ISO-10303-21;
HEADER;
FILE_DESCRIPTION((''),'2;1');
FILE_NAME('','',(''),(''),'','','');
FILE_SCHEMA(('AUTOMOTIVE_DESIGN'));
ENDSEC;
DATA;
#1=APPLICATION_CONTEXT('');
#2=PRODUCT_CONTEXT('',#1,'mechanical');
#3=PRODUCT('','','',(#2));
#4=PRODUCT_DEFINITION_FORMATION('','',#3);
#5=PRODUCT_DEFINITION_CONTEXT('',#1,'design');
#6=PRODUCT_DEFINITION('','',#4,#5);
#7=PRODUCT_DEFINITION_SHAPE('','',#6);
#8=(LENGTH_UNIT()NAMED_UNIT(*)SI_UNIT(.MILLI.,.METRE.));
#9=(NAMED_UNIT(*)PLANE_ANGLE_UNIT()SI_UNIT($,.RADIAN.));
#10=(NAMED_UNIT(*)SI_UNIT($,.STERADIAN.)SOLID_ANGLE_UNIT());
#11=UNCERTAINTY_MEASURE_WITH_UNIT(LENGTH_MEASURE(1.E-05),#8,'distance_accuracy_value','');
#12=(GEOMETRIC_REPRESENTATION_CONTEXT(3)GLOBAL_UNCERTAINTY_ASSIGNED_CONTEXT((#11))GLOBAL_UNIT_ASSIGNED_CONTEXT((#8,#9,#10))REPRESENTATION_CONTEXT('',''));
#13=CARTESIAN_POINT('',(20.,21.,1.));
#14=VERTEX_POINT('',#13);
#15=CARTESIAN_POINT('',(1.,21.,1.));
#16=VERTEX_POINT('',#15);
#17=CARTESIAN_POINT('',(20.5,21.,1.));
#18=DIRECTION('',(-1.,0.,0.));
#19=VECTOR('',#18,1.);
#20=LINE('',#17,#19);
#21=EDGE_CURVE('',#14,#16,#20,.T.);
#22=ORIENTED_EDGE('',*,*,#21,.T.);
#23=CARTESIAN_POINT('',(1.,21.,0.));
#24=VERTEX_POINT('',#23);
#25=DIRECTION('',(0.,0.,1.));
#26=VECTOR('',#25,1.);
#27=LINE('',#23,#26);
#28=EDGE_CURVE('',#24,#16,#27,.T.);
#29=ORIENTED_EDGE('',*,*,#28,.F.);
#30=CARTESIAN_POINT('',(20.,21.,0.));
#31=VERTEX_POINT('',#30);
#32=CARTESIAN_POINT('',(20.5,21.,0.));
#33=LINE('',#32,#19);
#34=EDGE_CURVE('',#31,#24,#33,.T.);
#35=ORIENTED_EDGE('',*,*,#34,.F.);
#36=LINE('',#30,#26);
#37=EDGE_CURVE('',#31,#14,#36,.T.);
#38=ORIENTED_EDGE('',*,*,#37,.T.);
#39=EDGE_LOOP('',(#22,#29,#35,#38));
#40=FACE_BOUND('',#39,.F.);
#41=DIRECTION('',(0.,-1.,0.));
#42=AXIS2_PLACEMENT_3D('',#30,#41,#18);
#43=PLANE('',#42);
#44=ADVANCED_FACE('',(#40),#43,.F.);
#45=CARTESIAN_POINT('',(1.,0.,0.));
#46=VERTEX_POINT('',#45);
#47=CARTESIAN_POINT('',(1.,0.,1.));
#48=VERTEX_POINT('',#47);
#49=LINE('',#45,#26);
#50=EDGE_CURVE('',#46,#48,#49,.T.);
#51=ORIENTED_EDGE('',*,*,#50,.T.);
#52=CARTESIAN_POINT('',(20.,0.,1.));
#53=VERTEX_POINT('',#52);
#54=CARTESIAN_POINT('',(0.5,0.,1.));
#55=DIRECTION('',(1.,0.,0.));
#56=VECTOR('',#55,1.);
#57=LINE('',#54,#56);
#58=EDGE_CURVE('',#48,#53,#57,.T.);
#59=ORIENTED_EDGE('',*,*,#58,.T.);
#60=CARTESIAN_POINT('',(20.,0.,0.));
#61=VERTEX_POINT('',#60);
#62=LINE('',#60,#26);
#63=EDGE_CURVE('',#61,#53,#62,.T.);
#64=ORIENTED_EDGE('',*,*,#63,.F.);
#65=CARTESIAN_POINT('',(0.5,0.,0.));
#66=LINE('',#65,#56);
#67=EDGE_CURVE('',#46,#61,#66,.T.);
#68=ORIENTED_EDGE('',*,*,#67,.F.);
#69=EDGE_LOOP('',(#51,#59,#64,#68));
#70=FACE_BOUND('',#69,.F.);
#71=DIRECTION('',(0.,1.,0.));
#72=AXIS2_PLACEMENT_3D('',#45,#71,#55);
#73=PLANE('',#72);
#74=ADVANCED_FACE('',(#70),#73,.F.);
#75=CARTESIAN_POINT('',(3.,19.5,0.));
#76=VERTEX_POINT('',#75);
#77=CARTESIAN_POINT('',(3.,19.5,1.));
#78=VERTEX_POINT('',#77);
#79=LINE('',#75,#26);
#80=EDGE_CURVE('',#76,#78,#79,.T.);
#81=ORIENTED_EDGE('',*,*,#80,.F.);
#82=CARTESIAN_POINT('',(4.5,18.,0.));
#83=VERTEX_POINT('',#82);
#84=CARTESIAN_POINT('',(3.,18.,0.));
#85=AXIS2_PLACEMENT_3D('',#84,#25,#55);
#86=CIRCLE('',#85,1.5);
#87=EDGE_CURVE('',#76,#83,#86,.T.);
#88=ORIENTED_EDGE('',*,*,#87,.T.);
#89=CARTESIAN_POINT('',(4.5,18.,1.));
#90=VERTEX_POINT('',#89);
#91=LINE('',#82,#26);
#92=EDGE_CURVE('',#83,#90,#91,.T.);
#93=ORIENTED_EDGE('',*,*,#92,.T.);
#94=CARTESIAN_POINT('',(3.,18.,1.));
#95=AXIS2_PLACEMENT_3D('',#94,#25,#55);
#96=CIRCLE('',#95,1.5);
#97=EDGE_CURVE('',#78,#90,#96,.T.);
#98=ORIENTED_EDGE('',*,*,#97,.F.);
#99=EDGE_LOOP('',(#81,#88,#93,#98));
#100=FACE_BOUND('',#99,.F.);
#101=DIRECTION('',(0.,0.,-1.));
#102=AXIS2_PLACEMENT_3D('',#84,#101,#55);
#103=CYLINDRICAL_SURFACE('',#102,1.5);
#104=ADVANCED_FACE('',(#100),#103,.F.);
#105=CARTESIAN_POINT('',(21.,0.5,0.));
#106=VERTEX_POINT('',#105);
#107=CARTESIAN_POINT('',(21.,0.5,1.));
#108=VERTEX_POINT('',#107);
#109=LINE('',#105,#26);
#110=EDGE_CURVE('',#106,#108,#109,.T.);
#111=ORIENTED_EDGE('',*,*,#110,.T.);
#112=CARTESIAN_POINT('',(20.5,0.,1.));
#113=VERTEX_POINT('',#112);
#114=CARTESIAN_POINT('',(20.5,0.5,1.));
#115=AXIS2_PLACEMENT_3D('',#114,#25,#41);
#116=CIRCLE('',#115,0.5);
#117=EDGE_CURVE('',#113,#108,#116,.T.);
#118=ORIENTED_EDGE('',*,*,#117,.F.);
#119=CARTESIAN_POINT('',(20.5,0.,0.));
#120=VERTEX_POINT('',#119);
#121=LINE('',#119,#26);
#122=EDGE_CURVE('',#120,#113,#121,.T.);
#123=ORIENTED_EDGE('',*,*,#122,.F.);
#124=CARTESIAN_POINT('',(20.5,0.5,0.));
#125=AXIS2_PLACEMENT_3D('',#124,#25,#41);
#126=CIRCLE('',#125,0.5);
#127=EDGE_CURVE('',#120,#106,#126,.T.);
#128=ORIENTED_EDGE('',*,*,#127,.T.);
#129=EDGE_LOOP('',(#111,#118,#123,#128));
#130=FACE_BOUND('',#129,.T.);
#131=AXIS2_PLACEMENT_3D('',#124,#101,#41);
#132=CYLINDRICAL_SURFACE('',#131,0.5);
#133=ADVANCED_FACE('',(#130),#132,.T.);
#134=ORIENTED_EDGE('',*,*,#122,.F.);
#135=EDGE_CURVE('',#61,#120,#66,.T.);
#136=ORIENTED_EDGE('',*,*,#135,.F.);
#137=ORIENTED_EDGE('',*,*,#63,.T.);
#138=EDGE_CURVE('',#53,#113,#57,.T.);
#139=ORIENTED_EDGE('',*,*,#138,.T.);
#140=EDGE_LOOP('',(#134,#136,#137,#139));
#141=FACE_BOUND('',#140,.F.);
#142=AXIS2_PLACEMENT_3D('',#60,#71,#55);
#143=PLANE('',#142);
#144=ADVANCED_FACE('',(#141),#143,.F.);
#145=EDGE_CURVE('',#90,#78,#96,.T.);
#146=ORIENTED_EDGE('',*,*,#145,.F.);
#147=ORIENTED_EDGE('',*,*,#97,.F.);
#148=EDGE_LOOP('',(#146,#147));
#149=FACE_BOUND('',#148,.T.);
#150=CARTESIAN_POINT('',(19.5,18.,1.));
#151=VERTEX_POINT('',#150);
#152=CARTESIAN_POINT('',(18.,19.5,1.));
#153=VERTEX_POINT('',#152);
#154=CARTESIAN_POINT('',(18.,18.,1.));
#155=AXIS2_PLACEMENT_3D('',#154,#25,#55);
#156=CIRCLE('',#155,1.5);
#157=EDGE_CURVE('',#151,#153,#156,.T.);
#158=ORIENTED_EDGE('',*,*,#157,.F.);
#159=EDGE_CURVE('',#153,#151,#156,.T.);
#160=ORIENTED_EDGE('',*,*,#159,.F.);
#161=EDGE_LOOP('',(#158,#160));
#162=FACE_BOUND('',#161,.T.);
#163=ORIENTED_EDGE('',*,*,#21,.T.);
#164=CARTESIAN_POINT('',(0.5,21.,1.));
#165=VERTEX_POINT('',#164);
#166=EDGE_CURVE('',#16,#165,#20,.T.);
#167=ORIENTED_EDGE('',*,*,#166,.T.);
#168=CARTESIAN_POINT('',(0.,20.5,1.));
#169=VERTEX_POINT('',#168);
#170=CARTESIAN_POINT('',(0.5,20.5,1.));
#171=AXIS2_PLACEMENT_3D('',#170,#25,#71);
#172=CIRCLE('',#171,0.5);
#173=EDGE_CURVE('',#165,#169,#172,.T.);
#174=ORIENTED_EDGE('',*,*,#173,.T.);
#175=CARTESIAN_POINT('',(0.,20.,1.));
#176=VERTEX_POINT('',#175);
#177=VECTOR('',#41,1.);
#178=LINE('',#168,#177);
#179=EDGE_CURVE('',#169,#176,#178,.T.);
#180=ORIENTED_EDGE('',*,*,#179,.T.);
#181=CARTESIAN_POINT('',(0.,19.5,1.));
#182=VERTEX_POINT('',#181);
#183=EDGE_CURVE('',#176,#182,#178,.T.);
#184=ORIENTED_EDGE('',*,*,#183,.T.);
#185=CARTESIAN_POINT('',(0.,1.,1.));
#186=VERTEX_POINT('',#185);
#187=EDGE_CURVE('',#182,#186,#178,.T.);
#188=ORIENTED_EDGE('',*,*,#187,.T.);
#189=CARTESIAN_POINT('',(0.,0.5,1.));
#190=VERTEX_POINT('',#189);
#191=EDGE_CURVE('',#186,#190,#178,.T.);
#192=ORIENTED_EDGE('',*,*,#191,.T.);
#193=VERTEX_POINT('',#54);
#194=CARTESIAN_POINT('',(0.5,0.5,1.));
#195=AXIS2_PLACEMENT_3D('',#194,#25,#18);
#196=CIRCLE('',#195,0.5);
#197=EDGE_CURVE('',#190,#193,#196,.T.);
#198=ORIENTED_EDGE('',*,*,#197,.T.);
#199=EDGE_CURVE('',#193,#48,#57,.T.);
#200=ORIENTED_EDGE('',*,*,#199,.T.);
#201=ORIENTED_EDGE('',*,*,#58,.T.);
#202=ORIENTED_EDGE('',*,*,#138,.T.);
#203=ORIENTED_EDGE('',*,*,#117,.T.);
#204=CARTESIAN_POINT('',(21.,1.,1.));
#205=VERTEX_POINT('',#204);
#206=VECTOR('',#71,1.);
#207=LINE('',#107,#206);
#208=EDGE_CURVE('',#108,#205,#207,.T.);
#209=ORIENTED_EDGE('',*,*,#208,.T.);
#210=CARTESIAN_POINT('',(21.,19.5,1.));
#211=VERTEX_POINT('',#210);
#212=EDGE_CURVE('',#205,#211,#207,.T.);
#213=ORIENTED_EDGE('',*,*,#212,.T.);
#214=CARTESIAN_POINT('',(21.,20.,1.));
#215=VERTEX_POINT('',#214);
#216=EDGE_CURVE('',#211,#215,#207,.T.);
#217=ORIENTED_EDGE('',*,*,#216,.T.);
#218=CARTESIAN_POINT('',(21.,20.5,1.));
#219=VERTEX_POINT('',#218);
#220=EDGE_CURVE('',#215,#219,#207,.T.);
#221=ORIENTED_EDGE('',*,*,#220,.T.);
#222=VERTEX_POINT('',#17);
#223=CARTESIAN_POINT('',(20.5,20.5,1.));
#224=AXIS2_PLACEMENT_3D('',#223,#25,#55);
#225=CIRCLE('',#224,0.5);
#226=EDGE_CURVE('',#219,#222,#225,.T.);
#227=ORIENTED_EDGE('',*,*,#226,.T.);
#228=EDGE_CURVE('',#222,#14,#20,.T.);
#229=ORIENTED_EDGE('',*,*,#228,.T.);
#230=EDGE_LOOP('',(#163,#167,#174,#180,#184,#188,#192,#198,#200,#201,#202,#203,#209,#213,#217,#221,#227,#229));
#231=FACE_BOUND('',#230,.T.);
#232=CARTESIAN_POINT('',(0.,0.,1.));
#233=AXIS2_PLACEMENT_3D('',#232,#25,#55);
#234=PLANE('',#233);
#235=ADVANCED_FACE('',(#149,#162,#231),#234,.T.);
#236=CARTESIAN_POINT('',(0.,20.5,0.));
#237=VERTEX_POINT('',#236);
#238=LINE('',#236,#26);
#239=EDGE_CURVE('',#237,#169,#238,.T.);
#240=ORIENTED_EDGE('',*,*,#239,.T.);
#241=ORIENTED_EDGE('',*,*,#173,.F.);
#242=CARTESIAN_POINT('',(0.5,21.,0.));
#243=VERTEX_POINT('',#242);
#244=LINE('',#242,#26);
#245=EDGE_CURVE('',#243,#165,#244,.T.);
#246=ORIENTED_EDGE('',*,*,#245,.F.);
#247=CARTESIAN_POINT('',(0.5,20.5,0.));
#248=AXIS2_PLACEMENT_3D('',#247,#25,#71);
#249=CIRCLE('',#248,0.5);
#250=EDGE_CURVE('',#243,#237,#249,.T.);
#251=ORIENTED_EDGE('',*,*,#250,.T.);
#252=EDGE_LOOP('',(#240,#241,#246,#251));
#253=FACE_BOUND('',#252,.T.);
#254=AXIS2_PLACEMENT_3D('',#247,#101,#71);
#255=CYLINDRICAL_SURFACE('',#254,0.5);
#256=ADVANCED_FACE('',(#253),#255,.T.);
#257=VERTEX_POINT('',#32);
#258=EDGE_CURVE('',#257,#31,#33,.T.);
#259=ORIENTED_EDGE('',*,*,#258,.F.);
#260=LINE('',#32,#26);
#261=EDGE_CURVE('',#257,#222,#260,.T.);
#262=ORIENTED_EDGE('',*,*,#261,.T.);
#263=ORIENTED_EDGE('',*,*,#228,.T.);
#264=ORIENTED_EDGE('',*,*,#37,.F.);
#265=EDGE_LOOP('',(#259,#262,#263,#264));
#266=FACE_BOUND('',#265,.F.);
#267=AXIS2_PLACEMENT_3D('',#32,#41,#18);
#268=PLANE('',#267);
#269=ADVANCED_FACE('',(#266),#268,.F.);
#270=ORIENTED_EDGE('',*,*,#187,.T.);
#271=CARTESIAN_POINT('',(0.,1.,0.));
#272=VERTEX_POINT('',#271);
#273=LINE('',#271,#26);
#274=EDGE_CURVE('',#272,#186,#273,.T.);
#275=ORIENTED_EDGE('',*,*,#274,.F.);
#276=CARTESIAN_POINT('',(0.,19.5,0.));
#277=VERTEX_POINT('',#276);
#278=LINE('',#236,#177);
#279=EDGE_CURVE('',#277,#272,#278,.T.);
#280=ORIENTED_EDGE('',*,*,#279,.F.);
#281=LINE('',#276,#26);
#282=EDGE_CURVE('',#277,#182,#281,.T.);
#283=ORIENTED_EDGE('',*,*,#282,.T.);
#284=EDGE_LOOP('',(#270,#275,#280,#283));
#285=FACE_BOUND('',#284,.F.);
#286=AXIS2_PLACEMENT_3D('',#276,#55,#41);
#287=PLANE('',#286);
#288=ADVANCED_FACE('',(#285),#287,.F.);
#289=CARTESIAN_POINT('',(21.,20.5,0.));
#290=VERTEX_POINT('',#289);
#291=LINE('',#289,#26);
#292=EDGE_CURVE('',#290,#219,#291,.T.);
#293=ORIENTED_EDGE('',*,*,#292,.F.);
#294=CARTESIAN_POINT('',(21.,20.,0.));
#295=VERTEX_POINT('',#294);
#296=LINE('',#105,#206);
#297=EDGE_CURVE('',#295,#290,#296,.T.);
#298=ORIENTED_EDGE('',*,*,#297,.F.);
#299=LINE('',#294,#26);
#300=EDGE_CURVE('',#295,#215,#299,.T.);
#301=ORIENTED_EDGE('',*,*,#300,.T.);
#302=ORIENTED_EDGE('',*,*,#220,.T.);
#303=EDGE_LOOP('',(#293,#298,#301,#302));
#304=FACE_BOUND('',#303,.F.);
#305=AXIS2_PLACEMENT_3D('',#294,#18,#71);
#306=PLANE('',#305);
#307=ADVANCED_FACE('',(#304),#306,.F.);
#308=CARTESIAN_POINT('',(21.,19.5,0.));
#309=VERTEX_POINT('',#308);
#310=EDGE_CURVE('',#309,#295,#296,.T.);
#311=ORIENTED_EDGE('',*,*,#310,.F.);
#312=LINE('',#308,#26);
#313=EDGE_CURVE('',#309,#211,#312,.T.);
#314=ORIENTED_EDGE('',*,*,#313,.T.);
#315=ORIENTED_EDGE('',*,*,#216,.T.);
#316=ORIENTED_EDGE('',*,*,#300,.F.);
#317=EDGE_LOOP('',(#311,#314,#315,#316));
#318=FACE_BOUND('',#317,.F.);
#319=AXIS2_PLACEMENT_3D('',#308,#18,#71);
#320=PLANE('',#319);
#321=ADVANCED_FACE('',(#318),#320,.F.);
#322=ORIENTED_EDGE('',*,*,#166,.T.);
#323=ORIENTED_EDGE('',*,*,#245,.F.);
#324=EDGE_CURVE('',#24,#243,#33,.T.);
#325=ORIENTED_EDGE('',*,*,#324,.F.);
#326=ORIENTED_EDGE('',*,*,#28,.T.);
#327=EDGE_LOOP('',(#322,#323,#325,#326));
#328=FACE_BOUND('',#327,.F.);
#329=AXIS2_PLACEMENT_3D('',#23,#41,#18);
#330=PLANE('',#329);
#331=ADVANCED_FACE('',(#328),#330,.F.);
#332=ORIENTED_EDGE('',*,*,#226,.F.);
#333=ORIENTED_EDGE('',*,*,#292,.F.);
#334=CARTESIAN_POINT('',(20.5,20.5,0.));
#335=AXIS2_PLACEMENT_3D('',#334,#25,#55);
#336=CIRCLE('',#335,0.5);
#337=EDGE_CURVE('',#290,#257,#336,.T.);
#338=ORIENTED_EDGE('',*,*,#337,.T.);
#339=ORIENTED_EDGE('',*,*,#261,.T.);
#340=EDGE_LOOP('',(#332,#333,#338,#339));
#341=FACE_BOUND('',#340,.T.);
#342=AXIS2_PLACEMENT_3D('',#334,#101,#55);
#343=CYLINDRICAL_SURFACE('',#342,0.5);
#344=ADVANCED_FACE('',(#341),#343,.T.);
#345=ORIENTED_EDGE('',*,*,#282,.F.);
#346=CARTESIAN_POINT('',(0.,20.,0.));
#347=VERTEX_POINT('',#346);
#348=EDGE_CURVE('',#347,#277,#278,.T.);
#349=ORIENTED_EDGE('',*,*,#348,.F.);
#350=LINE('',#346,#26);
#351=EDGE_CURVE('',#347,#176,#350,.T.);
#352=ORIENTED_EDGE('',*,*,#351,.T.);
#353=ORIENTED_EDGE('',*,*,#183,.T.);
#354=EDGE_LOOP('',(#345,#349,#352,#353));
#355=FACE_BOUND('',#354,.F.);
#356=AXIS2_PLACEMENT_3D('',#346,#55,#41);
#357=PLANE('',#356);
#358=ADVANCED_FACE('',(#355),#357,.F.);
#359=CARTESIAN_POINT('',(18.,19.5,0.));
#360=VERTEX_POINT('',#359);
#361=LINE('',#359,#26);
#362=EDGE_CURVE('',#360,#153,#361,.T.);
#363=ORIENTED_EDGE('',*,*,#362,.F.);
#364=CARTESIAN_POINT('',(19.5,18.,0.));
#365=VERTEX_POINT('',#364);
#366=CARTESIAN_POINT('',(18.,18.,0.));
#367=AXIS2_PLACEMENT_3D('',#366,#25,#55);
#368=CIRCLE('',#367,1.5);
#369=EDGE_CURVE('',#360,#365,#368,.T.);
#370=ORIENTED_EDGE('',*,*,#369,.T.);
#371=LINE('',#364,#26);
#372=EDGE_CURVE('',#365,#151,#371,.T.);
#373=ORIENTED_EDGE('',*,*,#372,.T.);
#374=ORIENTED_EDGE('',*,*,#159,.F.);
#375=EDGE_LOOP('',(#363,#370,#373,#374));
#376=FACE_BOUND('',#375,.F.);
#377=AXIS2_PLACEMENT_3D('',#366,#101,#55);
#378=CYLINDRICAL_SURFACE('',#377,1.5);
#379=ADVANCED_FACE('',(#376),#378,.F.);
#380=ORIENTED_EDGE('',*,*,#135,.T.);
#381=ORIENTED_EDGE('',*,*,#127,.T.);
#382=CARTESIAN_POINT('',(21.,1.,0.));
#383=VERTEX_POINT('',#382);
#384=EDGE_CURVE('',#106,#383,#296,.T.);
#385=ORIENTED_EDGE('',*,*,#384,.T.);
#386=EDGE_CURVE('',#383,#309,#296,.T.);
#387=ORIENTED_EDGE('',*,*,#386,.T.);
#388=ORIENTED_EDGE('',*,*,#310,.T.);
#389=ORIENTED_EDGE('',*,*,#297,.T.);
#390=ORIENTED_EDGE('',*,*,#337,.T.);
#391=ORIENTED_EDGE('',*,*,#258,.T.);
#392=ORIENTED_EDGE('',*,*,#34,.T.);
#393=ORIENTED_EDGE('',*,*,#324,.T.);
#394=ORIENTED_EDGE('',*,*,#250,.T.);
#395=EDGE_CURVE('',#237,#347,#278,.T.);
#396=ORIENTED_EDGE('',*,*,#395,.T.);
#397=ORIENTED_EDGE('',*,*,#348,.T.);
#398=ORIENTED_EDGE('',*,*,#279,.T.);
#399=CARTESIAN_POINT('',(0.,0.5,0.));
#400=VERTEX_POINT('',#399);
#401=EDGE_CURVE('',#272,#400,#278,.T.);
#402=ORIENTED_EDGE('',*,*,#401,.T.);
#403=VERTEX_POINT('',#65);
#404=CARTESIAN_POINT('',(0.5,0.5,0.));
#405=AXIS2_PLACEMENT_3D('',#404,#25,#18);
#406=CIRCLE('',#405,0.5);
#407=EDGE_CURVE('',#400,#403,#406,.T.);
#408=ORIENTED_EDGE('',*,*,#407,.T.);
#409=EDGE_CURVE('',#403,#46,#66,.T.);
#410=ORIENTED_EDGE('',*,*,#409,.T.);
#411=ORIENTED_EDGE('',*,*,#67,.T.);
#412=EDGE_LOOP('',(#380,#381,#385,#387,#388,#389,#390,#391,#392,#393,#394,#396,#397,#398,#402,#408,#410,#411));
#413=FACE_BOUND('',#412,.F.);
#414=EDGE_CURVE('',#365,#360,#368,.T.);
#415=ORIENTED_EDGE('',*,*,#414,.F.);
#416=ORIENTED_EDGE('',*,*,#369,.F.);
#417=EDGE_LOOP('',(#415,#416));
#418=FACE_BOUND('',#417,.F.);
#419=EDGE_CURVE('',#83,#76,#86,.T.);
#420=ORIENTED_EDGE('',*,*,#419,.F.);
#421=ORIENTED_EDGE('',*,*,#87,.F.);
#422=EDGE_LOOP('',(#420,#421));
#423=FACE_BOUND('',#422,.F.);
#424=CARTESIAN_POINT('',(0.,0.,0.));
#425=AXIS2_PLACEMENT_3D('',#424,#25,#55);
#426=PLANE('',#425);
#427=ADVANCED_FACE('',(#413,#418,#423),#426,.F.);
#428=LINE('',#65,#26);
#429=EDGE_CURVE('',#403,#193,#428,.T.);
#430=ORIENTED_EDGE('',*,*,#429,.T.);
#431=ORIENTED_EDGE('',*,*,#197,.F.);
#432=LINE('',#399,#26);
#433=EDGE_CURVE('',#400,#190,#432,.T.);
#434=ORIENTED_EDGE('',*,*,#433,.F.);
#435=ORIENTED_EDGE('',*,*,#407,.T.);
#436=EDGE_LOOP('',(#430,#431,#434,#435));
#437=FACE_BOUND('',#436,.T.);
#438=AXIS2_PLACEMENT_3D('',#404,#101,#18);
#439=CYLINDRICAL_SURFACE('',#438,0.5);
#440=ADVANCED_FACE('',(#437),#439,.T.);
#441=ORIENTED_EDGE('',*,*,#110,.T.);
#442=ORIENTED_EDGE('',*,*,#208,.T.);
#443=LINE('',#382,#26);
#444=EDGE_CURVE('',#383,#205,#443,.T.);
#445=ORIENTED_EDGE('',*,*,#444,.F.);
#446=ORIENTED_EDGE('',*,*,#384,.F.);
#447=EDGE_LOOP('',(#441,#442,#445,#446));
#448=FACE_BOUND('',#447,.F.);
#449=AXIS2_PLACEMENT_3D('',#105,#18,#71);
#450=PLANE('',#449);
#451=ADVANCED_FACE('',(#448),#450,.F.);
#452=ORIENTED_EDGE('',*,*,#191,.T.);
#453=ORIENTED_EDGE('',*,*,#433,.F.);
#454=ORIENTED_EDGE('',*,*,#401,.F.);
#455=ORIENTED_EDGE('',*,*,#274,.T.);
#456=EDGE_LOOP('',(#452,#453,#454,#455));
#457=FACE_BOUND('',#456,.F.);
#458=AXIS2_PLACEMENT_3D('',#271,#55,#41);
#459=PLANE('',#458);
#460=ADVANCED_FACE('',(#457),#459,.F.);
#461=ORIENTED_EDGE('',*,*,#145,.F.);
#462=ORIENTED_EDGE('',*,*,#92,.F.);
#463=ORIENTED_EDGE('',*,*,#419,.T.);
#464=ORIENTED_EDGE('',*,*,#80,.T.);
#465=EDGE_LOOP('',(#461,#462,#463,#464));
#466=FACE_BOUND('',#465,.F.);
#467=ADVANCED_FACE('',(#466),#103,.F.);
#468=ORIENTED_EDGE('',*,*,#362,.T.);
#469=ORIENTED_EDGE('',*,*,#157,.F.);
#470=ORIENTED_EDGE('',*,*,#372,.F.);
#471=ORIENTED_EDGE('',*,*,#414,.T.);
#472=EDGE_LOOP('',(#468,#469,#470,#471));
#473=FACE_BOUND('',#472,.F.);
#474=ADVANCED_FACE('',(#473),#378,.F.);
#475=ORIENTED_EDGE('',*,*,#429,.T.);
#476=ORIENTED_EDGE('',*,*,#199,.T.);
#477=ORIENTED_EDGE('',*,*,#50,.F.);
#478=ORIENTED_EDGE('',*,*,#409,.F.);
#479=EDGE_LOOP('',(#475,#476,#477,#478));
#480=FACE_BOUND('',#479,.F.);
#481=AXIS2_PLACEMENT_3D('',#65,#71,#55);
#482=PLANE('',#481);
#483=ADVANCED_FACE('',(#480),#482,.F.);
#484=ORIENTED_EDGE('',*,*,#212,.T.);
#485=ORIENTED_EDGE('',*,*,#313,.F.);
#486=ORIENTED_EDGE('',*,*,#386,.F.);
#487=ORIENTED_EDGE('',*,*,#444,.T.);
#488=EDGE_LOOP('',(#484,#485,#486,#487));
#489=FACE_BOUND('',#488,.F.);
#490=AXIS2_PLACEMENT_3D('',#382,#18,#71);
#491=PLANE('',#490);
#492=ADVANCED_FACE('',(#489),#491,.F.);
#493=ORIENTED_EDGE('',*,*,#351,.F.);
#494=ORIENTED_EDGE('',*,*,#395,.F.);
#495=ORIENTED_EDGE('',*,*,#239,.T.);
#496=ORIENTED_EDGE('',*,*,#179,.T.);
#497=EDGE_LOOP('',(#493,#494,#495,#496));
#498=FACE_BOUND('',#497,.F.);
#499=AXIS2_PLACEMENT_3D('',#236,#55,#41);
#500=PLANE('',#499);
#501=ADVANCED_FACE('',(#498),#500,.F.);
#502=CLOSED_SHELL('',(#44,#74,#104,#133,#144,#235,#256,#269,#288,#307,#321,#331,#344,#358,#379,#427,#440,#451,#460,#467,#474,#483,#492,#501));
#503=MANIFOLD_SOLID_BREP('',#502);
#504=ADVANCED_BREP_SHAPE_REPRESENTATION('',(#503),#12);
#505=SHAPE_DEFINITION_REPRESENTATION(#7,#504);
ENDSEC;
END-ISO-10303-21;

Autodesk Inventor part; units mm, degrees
ref_plane "YZ Plane" through (0, 0, 0) normal (1, 0, 0) x (0, 1, 0)
ref_plane "XZ Plane" through (0, 0, 0) normal (0, 1, 0) x (-1, 0, 0)
ref_plane "XY Plane" through (0, 0, 0) normal (0, 0, 1) x (1, 0, 0)
sketch "Sketch1" plane through (0, 0, 0) normal (0, 0, 1) x (1, 0, 0)
  line L0 (0.5, 0) -> (20.5, 0)
  line L1 (21, 0.5) -> (21, 20.5)
  line L2 (20.5, 21) -> (0.5, 21)
  line L3 (0, 20.5) -> (0, 0.5)
  line L4 (0, 20.5) -> (0, 20)
  line L5 (1, 21) -> (0.5, 21)
  line L6 (0, 1) -> (0, 0.5)
  line L7 (0.5, 0) -> (1, 0)
  line L8 (21, 20) -> (21, 20.5)
  line L9 (20.5, 21) -> (20, 21)
  line L10 (20, 0) -> (20.5, 0)
  line L11 (21, 0.5) -> (21, 1)
  arc A0 (0.5, 21) -> (0, 20.5) centre (0.5, 20.5) ccw
  arc A1 (21, 20.5) -> (20.5, 21) centre (20.5, 20.5) ccw
  arc A2 (20.5, 0) -> (21, 0.5) centre (20.5, 0.5) ccw
  arc A3 (0, 0.5) -> (0.5, 0) centre (0.5, 0.5) ccw
  line L12 (0, 21) -> (0, 19.5)
  line L13 (0, 19.5) -> (3, 19.5)
  line L14 (21, 21) -> (21, 19.5)
  line L15 (21, 19.5) -> (18, 19.5)
  line L16 (3, 19.5) -> (3, 18)
  line L17 (18, 19.5) -> (18, 18)
  circle A4 centre (3, 18) radius 1.5
  circle A5 centre (18, 18) radius 1.5
  point P0 (0, 0)
  dimension "d4" = 1.5
  dimension "d5" = 3
  dimension "d6" = 1.5
  dimension "d7" = 3
  dimension "d8" = 1.5
  dimension "d9" = 1.5
extrude "Extrusion1" add sketch "Sketch1" along normal blind 1
sketch "Sketch2" plane through (0, 0, 1) normal (0, 0, 1) x (1, 0, 0)
  line L0 (20.5, 21) -> (0.5, 21) projected
  circle A0 centre (18, 18) radius 1.5 projected
  circle A1 centre (3, 18) radius 1.5 projected
  line L1 (20.5, 21) -> (0.5, 21) projected
  arc A2 (0.5, 21) -> (0, 20.5) centre (0.5, 20.5) ccw projected
  line L2 (0, 20.5) -> (0, 0.5) projected
  arc A3 (0, 0.5) -> (0.5, 0) centre (0.5, 0.5) ccw projected
  line L3 (0.5, 0) -> (20.5, 0) projected
  arc A4 (20.5, 0) -> (21, 0.5) centre (20.5, 0.5) ccw projected
  line L4 (21, 0.5) -> (21, 20.5) projected
  arc A5 (21, 20.5) -> (20.5, 21) centre (20.5, 20.5) ccw projected
  point P0 (0, 0)
properties part number "RGBsensor"
